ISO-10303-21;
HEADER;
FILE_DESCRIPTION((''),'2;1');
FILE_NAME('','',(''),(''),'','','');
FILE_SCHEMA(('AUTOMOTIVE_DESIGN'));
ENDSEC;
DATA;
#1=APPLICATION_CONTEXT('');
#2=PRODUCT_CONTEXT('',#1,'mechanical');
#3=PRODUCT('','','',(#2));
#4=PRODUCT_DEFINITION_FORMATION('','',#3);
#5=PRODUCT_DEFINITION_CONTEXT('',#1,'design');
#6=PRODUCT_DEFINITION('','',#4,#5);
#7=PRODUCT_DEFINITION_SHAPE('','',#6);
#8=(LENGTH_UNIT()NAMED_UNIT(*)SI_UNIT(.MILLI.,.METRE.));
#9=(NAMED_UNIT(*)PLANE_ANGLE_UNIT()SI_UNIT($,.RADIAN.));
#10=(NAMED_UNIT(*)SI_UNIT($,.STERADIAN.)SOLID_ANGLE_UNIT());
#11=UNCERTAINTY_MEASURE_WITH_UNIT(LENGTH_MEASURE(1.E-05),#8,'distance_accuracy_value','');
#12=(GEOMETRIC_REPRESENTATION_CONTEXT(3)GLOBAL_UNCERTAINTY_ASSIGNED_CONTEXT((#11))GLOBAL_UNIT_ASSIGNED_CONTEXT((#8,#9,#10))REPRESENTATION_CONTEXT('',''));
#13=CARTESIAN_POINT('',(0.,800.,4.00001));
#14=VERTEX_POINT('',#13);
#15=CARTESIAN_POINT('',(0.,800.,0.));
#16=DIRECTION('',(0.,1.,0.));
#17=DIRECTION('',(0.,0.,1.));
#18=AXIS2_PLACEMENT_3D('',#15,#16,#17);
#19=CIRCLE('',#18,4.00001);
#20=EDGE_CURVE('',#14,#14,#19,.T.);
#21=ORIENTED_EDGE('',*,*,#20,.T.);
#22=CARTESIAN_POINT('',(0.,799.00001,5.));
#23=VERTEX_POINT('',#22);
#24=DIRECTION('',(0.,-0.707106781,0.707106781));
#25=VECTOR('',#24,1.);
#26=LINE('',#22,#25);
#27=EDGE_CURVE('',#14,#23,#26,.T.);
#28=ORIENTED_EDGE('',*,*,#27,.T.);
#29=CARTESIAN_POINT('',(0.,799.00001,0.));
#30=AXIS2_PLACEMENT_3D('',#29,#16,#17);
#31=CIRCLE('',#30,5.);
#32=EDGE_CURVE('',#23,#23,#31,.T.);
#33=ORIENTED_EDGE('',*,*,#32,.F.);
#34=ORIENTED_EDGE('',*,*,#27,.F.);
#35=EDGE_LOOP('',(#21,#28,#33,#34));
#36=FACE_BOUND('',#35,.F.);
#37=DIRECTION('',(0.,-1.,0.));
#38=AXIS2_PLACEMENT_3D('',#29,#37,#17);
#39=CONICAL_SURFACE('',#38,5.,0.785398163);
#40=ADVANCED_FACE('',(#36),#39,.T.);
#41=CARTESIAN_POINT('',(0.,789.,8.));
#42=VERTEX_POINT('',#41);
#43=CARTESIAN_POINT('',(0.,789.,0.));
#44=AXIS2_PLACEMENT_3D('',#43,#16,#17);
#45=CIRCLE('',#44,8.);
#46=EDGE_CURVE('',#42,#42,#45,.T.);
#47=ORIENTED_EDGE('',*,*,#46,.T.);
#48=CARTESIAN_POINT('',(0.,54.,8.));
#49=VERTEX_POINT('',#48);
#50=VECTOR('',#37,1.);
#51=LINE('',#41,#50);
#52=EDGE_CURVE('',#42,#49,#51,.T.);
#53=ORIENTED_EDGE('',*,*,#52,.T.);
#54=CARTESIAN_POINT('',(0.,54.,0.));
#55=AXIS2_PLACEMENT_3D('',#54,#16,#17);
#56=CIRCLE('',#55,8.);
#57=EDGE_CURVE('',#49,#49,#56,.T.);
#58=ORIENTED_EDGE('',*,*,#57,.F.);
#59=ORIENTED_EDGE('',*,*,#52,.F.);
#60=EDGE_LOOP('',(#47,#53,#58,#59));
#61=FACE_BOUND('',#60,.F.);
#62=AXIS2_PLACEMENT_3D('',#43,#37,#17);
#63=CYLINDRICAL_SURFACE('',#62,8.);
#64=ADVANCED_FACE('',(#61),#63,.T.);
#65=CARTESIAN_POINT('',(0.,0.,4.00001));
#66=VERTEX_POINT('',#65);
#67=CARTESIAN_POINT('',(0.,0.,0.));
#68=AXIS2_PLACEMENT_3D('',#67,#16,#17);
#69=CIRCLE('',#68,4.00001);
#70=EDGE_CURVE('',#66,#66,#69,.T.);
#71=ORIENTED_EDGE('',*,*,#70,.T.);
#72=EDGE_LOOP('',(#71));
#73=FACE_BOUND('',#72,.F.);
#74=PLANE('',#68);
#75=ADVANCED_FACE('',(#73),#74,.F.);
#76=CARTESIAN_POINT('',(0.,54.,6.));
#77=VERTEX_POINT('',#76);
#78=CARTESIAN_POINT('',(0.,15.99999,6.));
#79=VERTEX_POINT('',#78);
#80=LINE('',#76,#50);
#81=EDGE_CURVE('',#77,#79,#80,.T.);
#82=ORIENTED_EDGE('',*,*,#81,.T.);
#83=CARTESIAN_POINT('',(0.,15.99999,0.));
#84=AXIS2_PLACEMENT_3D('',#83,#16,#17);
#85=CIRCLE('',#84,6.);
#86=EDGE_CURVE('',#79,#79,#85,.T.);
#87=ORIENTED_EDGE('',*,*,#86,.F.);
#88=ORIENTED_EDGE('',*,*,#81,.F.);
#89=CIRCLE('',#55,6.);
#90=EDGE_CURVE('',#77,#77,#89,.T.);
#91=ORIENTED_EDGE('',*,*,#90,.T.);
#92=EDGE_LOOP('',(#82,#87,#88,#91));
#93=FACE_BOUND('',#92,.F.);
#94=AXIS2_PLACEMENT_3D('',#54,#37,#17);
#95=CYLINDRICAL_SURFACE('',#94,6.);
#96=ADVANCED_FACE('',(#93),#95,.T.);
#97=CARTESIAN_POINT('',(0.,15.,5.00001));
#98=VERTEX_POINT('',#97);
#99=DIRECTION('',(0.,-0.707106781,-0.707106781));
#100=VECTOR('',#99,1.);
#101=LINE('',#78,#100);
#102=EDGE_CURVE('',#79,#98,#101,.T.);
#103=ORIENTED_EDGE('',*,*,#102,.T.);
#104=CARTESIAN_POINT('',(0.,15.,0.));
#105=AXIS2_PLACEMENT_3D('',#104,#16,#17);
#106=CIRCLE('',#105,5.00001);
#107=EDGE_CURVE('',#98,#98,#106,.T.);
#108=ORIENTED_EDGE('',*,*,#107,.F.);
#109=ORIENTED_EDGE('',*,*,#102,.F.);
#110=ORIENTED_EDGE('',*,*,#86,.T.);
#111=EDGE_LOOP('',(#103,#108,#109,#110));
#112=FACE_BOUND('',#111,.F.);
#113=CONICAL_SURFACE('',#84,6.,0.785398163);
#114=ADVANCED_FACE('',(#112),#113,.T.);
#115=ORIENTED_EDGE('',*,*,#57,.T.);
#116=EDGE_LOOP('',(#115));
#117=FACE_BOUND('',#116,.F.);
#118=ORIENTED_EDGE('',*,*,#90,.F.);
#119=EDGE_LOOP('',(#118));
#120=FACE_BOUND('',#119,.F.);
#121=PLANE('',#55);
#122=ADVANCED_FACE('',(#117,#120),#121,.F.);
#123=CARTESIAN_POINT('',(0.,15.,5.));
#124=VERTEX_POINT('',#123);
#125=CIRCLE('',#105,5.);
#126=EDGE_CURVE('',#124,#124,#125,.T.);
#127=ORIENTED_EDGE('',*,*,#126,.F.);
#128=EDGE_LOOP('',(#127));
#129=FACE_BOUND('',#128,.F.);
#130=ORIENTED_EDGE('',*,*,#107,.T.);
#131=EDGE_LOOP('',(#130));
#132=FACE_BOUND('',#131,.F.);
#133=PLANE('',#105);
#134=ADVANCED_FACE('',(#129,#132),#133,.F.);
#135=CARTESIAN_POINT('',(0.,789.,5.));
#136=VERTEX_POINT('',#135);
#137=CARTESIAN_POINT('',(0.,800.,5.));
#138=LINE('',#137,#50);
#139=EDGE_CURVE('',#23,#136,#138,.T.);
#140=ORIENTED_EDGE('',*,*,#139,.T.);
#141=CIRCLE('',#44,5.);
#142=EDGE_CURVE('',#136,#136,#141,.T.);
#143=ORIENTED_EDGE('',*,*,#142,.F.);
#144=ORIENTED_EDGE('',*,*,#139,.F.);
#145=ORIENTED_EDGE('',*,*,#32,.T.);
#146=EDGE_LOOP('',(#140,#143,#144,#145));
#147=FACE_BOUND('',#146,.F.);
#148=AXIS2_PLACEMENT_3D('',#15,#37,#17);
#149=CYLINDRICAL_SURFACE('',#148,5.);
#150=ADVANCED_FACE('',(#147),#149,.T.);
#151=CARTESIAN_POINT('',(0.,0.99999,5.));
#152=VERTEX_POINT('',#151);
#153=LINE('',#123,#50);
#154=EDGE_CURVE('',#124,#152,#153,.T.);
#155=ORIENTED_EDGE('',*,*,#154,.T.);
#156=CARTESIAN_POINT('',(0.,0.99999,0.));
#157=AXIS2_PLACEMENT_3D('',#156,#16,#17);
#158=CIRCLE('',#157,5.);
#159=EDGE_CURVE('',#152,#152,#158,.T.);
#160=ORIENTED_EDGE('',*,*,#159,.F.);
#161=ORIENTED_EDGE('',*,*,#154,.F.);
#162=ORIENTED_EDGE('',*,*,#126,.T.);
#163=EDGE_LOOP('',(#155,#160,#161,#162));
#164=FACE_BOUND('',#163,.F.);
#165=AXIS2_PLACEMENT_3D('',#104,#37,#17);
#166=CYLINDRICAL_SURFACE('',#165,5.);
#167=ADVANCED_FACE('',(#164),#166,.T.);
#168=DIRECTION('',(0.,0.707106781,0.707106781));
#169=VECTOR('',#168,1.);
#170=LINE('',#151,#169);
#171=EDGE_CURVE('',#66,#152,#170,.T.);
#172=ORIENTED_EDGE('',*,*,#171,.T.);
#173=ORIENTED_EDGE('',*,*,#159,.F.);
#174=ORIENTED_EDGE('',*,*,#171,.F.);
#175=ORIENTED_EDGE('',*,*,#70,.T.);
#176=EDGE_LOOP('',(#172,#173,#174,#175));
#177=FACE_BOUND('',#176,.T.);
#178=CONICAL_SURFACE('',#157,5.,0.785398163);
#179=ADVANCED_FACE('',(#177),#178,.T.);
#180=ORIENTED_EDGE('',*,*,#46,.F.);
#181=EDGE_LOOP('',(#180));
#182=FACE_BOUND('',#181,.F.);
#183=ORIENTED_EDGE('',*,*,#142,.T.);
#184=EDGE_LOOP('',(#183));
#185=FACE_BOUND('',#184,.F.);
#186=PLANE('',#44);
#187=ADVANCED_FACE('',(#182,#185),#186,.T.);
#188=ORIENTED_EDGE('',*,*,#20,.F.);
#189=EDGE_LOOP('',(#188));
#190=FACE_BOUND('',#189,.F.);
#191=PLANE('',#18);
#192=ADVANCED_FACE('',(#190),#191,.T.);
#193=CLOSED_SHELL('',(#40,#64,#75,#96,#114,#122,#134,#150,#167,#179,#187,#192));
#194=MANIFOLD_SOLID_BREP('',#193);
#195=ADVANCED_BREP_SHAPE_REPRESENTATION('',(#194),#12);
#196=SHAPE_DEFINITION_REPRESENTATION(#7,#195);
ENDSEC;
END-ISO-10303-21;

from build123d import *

# Parameters (mm, degrees)
F2_SIZE = 0.99999


# Not quite as in the source:
# - a fillet or chamfer is up to 0.001 mm smaller than in the source, because OpenCascade refuses the exact size


with BuildPart() as f1:
    # F0 (on Right) → F1 (revolve)
    with BuildSketch(Plane.YZ):
        Polygon((0, 5), (0, 0), (800, 0), (800, 5), (789, 5), (789, 8), (54, 8), (54, 6), (15, 6), (15, 5), align=None)
    revolve(axis=Axis((0, 344.1624132916, 0), (0, 1, 0)))

    # F2 (size 1 in the source; OpenCascade refuses exactly that, so slightly less here)
    f2_edges = [f1.edges().sort_by_distance(p)[0] for p in [
        (0, 0, -5),
        (0, 15, -6),
        (0, 800, -5),
    ]]
    chamfer(f2_edges, length=F2_SIZE)


solid = f1.part
